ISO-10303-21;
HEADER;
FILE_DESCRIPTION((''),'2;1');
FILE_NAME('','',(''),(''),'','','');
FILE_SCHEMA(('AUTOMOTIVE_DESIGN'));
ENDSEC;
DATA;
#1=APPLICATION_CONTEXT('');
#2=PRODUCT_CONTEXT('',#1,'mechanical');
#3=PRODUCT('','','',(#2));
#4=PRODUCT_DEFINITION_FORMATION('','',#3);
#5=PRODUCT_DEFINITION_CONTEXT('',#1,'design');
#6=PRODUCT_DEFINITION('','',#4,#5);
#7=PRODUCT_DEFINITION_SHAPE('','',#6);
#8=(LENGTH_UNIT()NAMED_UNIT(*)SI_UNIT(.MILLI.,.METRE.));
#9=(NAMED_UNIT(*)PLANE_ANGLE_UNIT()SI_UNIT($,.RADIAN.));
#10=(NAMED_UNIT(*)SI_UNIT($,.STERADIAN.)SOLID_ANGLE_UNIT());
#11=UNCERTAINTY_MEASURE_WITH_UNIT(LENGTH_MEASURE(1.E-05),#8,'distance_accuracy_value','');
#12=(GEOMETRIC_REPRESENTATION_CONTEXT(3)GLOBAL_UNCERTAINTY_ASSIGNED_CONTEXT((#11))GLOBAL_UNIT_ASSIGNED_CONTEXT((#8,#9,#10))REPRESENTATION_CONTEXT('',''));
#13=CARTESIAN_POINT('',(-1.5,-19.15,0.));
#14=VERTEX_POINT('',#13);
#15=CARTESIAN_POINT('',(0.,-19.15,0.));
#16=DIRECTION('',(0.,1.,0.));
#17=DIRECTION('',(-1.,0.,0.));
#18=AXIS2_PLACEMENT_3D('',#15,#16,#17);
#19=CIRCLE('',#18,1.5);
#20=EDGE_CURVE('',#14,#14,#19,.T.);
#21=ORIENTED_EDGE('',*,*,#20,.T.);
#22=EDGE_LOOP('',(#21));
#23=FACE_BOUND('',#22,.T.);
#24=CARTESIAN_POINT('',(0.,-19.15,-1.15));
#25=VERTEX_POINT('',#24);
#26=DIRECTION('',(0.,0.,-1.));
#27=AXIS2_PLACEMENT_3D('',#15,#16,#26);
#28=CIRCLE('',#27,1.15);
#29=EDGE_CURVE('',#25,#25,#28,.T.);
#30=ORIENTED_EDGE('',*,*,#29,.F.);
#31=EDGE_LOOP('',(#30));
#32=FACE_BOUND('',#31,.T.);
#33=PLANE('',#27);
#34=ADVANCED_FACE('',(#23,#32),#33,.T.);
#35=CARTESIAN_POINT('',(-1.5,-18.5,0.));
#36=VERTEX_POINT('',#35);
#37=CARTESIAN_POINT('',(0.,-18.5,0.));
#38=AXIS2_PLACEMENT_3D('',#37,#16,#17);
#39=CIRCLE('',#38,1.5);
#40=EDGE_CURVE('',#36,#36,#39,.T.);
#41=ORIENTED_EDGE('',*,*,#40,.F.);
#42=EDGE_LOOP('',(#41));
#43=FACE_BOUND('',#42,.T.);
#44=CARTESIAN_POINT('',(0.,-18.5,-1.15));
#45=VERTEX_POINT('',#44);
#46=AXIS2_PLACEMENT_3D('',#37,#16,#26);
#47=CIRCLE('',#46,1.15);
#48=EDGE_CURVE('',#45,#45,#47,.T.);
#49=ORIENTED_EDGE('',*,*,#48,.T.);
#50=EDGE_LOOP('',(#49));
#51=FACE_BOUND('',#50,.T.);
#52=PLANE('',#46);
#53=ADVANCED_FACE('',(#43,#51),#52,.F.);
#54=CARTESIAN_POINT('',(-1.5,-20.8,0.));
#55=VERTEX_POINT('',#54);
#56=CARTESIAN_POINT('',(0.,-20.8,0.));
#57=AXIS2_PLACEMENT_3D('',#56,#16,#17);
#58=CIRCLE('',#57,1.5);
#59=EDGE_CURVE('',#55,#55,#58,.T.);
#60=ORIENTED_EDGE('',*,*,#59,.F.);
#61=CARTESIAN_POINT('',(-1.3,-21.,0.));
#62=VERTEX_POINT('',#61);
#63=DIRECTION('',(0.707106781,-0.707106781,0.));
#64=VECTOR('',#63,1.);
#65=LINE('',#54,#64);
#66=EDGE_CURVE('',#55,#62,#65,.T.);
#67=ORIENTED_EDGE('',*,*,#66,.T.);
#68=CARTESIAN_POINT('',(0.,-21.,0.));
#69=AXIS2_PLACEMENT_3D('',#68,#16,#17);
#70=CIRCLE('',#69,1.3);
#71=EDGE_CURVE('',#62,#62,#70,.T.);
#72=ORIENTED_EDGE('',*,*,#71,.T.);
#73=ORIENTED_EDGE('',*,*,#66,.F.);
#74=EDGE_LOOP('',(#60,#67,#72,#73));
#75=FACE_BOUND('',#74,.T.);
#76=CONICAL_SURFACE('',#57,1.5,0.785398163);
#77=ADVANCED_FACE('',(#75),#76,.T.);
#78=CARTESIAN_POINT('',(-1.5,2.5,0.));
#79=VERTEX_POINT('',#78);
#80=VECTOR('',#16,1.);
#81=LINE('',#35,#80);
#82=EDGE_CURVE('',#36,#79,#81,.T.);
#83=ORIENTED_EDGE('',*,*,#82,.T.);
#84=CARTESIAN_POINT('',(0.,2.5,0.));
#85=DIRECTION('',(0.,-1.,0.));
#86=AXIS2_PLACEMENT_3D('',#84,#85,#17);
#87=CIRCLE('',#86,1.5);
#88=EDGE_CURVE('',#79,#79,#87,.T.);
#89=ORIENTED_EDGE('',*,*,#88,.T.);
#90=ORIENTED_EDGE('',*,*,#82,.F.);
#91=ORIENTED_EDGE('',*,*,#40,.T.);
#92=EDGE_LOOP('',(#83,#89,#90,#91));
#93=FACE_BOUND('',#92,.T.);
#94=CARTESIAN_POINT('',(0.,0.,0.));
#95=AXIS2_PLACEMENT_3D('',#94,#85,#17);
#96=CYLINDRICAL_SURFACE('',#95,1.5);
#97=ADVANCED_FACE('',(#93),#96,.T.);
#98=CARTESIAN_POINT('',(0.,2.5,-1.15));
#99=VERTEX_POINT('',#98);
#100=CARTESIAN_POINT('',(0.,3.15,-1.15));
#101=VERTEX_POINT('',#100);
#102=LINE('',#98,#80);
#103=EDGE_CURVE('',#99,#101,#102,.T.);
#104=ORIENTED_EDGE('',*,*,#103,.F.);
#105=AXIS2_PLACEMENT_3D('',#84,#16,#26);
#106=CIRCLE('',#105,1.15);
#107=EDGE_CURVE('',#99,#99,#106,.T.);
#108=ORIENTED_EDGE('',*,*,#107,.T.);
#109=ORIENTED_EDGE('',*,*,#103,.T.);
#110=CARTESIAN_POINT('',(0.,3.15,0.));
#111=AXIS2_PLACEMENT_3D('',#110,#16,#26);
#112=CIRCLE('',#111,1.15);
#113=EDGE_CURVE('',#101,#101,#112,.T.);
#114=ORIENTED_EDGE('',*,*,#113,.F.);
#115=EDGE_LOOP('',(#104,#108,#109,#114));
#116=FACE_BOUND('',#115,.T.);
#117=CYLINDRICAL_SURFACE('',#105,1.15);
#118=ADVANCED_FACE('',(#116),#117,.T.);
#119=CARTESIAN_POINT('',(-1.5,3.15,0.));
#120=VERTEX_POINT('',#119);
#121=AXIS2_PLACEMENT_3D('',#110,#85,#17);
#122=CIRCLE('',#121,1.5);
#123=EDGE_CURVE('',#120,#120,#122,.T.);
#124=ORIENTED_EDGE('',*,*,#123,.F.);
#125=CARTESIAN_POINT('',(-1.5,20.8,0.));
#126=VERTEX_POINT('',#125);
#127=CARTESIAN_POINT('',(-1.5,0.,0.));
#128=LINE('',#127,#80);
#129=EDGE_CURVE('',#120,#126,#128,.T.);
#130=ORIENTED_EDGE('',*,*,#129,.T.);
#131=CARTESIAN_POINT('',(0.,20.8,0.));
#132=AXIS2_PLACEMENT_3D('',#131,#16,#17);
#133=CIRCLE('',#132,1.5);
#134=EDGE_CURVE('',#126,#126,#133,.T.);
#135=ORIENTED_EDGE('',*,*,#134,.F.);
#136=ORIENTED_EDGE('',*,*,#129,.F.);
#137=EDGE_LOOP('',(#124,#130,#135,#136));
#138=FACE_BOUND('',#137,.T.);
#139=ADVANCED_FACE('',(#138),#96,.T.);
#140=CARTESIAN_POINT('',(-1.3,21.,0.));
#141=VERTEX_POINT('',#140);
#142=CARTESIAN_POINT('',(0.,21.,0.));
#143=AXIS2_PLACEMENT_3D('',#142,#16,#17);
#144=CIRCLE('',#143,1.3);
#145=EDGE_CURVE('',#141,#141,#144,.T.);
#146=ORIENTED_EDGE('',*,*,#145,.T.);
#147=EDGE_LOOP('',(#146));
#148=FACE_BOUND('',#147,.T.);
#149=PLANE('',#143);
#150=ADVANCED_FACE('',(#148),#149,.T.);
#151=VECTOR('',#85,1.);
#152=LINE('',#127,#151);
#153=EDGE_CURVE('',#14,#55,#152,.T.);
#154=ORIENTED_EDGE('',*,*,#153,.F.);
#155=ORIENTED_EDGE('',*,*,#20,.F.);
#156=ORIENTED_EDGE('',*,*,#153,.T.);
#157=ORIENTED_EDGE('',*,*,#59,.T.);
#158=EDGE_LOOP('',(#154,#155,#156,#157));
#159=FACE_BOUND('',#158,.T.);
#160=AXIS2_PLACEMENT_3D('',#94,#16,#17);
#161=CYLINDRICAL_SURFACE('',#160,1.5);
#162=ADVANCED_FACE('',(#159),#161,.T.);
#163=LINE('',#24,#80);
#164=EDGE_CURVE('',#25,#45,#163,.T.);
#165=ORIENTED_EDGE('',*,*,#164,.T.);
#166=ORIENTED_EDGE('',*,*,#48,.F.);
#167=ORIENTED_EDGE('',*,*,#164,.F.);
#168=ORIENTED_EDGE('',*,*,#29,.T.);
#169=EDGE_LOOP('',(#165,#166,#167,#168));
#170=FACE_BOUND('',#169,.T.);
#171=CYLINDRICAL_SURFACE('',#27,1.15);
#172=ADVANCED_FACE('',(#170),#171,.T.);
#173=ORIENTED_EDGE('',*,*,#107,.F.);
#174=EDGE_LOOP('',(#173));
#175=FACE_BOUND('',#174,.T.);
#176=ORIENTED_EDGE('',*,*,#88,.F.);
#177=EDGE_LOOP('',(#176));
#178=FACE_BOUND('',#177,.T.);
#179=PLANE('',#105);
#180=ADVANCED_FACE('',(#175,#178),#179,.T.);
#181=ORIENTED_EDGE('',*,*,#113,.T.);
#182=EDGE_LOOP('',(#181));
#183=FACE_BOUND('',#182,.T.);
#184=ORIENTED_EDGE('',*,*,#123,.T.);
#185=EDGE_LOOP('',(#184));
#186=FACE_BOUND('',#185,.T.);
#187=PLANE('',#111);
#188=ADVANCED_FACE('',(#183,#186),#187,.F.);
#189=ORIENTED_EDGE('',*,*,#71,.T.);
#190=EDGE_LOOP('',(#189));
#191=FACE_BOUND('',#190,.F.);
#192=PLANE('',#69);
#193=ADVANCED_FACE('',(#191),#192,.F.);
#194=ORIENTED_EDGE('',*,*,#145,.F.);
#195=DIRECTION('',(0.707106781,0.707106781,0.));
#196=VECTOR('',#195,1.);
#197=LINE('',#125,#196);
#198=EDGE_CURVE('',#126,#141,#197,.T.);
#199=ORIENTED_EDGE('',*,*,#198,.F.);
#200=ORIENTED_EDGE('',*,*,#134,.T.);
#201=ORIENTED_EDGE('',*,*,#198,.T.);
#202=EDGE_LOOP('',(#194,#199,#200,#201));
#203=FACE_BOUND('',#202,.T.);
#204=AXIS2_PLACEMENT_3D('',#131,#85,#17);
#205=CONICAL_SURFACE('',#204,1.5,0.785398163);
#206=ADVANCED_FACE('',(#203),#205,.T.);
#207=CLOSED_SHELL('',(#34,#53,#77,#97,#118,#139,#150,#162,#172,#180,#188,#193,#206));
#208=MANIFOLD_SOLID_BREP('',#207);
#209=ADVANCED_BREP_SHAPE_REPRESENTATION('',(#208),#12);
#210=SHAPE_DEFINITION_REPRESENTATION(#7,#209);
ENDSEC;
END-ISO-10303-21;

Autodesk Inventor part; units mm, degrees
ref_plane "YZ Plane" through (0, 0, 0) normal (1, 0, 0) x (0, 1, 0)
ref_plane "XZ Plane" through (0, 0, 0) normal (0, 1, 0) x (-1, 0, 0)
ref_plane "XY Plane" through (0, 0, 0) normal (0, 0, 1) x (1, 0, 0)
sketch "Sketch4" plane through (0, 0, 0) normal (0, 1, 0) x (-1, 0, 0)
  circle A0 centre (0, 0) radius 1.5
extrude "Extrusion2" add sketch "Sketch4" along normal mid plane 42
thread "Thread1" size "M3x0.5" class "6g" standard "ANSI Metric M Profile" length 10
chamfer "Chamfer1" distance 0.2 angle 45 2 edges at (1.5, 21, 0) (1.5, -21, 0)
sketch "Sketch14" plane through (0, 0, 0) normal (1, 0, 0) x (0, 1, 0)
  line L0 (-20.8, -1.5) -> (20.8, -1.5) projected
  line L1 (3.15, -1.5) -> (2.5, -1.5)
  line L2 (2.5, -1.5) -> (2.5, -1.15)
  line L3 (2.5, -1.15) -> (3.15, -1.15)
  line L4 (3.15, -1.15) -> (3.15, -1.5)
  line L5 (-21, -1.3) -> (-21, 1.3) projected
  line L6 (-21, 0) -> (13, 0) construction
  line L7 (-20.8, -1.5) -> (20.8, -1.5) projected
  line L8 (-18.5, -1.5) -> (-19.15, -1.5)
  line L9 (-19.15, -1.5) -> (-19.15, -1.15)
  line L10 (-19.15, -1.15) -> (-18.5, -1.15)
  line L11 (-18.5, -1.15) -> (-18.5, -1.5)
  point P0 (0, 0)
  point P1 (-19.15, -1.5)
  dimension "d105" = 1.15
  dimension "d106" = 0.65
  dimension "d107" = 23.5
  dimension "d109" = 0.65
  dimension "d110" = 1.15
  dimension "d111" = 21
revolve "Revolution1" cut sketch "Sketch14" angle 360 about axis through (0, -21, 0) along (0, 1, 0)
equation "\"d109\" = d106"
equation "\"d110\" = d105"
properties part number "Ball Track Support" material "Bronze, Soft Tin"
